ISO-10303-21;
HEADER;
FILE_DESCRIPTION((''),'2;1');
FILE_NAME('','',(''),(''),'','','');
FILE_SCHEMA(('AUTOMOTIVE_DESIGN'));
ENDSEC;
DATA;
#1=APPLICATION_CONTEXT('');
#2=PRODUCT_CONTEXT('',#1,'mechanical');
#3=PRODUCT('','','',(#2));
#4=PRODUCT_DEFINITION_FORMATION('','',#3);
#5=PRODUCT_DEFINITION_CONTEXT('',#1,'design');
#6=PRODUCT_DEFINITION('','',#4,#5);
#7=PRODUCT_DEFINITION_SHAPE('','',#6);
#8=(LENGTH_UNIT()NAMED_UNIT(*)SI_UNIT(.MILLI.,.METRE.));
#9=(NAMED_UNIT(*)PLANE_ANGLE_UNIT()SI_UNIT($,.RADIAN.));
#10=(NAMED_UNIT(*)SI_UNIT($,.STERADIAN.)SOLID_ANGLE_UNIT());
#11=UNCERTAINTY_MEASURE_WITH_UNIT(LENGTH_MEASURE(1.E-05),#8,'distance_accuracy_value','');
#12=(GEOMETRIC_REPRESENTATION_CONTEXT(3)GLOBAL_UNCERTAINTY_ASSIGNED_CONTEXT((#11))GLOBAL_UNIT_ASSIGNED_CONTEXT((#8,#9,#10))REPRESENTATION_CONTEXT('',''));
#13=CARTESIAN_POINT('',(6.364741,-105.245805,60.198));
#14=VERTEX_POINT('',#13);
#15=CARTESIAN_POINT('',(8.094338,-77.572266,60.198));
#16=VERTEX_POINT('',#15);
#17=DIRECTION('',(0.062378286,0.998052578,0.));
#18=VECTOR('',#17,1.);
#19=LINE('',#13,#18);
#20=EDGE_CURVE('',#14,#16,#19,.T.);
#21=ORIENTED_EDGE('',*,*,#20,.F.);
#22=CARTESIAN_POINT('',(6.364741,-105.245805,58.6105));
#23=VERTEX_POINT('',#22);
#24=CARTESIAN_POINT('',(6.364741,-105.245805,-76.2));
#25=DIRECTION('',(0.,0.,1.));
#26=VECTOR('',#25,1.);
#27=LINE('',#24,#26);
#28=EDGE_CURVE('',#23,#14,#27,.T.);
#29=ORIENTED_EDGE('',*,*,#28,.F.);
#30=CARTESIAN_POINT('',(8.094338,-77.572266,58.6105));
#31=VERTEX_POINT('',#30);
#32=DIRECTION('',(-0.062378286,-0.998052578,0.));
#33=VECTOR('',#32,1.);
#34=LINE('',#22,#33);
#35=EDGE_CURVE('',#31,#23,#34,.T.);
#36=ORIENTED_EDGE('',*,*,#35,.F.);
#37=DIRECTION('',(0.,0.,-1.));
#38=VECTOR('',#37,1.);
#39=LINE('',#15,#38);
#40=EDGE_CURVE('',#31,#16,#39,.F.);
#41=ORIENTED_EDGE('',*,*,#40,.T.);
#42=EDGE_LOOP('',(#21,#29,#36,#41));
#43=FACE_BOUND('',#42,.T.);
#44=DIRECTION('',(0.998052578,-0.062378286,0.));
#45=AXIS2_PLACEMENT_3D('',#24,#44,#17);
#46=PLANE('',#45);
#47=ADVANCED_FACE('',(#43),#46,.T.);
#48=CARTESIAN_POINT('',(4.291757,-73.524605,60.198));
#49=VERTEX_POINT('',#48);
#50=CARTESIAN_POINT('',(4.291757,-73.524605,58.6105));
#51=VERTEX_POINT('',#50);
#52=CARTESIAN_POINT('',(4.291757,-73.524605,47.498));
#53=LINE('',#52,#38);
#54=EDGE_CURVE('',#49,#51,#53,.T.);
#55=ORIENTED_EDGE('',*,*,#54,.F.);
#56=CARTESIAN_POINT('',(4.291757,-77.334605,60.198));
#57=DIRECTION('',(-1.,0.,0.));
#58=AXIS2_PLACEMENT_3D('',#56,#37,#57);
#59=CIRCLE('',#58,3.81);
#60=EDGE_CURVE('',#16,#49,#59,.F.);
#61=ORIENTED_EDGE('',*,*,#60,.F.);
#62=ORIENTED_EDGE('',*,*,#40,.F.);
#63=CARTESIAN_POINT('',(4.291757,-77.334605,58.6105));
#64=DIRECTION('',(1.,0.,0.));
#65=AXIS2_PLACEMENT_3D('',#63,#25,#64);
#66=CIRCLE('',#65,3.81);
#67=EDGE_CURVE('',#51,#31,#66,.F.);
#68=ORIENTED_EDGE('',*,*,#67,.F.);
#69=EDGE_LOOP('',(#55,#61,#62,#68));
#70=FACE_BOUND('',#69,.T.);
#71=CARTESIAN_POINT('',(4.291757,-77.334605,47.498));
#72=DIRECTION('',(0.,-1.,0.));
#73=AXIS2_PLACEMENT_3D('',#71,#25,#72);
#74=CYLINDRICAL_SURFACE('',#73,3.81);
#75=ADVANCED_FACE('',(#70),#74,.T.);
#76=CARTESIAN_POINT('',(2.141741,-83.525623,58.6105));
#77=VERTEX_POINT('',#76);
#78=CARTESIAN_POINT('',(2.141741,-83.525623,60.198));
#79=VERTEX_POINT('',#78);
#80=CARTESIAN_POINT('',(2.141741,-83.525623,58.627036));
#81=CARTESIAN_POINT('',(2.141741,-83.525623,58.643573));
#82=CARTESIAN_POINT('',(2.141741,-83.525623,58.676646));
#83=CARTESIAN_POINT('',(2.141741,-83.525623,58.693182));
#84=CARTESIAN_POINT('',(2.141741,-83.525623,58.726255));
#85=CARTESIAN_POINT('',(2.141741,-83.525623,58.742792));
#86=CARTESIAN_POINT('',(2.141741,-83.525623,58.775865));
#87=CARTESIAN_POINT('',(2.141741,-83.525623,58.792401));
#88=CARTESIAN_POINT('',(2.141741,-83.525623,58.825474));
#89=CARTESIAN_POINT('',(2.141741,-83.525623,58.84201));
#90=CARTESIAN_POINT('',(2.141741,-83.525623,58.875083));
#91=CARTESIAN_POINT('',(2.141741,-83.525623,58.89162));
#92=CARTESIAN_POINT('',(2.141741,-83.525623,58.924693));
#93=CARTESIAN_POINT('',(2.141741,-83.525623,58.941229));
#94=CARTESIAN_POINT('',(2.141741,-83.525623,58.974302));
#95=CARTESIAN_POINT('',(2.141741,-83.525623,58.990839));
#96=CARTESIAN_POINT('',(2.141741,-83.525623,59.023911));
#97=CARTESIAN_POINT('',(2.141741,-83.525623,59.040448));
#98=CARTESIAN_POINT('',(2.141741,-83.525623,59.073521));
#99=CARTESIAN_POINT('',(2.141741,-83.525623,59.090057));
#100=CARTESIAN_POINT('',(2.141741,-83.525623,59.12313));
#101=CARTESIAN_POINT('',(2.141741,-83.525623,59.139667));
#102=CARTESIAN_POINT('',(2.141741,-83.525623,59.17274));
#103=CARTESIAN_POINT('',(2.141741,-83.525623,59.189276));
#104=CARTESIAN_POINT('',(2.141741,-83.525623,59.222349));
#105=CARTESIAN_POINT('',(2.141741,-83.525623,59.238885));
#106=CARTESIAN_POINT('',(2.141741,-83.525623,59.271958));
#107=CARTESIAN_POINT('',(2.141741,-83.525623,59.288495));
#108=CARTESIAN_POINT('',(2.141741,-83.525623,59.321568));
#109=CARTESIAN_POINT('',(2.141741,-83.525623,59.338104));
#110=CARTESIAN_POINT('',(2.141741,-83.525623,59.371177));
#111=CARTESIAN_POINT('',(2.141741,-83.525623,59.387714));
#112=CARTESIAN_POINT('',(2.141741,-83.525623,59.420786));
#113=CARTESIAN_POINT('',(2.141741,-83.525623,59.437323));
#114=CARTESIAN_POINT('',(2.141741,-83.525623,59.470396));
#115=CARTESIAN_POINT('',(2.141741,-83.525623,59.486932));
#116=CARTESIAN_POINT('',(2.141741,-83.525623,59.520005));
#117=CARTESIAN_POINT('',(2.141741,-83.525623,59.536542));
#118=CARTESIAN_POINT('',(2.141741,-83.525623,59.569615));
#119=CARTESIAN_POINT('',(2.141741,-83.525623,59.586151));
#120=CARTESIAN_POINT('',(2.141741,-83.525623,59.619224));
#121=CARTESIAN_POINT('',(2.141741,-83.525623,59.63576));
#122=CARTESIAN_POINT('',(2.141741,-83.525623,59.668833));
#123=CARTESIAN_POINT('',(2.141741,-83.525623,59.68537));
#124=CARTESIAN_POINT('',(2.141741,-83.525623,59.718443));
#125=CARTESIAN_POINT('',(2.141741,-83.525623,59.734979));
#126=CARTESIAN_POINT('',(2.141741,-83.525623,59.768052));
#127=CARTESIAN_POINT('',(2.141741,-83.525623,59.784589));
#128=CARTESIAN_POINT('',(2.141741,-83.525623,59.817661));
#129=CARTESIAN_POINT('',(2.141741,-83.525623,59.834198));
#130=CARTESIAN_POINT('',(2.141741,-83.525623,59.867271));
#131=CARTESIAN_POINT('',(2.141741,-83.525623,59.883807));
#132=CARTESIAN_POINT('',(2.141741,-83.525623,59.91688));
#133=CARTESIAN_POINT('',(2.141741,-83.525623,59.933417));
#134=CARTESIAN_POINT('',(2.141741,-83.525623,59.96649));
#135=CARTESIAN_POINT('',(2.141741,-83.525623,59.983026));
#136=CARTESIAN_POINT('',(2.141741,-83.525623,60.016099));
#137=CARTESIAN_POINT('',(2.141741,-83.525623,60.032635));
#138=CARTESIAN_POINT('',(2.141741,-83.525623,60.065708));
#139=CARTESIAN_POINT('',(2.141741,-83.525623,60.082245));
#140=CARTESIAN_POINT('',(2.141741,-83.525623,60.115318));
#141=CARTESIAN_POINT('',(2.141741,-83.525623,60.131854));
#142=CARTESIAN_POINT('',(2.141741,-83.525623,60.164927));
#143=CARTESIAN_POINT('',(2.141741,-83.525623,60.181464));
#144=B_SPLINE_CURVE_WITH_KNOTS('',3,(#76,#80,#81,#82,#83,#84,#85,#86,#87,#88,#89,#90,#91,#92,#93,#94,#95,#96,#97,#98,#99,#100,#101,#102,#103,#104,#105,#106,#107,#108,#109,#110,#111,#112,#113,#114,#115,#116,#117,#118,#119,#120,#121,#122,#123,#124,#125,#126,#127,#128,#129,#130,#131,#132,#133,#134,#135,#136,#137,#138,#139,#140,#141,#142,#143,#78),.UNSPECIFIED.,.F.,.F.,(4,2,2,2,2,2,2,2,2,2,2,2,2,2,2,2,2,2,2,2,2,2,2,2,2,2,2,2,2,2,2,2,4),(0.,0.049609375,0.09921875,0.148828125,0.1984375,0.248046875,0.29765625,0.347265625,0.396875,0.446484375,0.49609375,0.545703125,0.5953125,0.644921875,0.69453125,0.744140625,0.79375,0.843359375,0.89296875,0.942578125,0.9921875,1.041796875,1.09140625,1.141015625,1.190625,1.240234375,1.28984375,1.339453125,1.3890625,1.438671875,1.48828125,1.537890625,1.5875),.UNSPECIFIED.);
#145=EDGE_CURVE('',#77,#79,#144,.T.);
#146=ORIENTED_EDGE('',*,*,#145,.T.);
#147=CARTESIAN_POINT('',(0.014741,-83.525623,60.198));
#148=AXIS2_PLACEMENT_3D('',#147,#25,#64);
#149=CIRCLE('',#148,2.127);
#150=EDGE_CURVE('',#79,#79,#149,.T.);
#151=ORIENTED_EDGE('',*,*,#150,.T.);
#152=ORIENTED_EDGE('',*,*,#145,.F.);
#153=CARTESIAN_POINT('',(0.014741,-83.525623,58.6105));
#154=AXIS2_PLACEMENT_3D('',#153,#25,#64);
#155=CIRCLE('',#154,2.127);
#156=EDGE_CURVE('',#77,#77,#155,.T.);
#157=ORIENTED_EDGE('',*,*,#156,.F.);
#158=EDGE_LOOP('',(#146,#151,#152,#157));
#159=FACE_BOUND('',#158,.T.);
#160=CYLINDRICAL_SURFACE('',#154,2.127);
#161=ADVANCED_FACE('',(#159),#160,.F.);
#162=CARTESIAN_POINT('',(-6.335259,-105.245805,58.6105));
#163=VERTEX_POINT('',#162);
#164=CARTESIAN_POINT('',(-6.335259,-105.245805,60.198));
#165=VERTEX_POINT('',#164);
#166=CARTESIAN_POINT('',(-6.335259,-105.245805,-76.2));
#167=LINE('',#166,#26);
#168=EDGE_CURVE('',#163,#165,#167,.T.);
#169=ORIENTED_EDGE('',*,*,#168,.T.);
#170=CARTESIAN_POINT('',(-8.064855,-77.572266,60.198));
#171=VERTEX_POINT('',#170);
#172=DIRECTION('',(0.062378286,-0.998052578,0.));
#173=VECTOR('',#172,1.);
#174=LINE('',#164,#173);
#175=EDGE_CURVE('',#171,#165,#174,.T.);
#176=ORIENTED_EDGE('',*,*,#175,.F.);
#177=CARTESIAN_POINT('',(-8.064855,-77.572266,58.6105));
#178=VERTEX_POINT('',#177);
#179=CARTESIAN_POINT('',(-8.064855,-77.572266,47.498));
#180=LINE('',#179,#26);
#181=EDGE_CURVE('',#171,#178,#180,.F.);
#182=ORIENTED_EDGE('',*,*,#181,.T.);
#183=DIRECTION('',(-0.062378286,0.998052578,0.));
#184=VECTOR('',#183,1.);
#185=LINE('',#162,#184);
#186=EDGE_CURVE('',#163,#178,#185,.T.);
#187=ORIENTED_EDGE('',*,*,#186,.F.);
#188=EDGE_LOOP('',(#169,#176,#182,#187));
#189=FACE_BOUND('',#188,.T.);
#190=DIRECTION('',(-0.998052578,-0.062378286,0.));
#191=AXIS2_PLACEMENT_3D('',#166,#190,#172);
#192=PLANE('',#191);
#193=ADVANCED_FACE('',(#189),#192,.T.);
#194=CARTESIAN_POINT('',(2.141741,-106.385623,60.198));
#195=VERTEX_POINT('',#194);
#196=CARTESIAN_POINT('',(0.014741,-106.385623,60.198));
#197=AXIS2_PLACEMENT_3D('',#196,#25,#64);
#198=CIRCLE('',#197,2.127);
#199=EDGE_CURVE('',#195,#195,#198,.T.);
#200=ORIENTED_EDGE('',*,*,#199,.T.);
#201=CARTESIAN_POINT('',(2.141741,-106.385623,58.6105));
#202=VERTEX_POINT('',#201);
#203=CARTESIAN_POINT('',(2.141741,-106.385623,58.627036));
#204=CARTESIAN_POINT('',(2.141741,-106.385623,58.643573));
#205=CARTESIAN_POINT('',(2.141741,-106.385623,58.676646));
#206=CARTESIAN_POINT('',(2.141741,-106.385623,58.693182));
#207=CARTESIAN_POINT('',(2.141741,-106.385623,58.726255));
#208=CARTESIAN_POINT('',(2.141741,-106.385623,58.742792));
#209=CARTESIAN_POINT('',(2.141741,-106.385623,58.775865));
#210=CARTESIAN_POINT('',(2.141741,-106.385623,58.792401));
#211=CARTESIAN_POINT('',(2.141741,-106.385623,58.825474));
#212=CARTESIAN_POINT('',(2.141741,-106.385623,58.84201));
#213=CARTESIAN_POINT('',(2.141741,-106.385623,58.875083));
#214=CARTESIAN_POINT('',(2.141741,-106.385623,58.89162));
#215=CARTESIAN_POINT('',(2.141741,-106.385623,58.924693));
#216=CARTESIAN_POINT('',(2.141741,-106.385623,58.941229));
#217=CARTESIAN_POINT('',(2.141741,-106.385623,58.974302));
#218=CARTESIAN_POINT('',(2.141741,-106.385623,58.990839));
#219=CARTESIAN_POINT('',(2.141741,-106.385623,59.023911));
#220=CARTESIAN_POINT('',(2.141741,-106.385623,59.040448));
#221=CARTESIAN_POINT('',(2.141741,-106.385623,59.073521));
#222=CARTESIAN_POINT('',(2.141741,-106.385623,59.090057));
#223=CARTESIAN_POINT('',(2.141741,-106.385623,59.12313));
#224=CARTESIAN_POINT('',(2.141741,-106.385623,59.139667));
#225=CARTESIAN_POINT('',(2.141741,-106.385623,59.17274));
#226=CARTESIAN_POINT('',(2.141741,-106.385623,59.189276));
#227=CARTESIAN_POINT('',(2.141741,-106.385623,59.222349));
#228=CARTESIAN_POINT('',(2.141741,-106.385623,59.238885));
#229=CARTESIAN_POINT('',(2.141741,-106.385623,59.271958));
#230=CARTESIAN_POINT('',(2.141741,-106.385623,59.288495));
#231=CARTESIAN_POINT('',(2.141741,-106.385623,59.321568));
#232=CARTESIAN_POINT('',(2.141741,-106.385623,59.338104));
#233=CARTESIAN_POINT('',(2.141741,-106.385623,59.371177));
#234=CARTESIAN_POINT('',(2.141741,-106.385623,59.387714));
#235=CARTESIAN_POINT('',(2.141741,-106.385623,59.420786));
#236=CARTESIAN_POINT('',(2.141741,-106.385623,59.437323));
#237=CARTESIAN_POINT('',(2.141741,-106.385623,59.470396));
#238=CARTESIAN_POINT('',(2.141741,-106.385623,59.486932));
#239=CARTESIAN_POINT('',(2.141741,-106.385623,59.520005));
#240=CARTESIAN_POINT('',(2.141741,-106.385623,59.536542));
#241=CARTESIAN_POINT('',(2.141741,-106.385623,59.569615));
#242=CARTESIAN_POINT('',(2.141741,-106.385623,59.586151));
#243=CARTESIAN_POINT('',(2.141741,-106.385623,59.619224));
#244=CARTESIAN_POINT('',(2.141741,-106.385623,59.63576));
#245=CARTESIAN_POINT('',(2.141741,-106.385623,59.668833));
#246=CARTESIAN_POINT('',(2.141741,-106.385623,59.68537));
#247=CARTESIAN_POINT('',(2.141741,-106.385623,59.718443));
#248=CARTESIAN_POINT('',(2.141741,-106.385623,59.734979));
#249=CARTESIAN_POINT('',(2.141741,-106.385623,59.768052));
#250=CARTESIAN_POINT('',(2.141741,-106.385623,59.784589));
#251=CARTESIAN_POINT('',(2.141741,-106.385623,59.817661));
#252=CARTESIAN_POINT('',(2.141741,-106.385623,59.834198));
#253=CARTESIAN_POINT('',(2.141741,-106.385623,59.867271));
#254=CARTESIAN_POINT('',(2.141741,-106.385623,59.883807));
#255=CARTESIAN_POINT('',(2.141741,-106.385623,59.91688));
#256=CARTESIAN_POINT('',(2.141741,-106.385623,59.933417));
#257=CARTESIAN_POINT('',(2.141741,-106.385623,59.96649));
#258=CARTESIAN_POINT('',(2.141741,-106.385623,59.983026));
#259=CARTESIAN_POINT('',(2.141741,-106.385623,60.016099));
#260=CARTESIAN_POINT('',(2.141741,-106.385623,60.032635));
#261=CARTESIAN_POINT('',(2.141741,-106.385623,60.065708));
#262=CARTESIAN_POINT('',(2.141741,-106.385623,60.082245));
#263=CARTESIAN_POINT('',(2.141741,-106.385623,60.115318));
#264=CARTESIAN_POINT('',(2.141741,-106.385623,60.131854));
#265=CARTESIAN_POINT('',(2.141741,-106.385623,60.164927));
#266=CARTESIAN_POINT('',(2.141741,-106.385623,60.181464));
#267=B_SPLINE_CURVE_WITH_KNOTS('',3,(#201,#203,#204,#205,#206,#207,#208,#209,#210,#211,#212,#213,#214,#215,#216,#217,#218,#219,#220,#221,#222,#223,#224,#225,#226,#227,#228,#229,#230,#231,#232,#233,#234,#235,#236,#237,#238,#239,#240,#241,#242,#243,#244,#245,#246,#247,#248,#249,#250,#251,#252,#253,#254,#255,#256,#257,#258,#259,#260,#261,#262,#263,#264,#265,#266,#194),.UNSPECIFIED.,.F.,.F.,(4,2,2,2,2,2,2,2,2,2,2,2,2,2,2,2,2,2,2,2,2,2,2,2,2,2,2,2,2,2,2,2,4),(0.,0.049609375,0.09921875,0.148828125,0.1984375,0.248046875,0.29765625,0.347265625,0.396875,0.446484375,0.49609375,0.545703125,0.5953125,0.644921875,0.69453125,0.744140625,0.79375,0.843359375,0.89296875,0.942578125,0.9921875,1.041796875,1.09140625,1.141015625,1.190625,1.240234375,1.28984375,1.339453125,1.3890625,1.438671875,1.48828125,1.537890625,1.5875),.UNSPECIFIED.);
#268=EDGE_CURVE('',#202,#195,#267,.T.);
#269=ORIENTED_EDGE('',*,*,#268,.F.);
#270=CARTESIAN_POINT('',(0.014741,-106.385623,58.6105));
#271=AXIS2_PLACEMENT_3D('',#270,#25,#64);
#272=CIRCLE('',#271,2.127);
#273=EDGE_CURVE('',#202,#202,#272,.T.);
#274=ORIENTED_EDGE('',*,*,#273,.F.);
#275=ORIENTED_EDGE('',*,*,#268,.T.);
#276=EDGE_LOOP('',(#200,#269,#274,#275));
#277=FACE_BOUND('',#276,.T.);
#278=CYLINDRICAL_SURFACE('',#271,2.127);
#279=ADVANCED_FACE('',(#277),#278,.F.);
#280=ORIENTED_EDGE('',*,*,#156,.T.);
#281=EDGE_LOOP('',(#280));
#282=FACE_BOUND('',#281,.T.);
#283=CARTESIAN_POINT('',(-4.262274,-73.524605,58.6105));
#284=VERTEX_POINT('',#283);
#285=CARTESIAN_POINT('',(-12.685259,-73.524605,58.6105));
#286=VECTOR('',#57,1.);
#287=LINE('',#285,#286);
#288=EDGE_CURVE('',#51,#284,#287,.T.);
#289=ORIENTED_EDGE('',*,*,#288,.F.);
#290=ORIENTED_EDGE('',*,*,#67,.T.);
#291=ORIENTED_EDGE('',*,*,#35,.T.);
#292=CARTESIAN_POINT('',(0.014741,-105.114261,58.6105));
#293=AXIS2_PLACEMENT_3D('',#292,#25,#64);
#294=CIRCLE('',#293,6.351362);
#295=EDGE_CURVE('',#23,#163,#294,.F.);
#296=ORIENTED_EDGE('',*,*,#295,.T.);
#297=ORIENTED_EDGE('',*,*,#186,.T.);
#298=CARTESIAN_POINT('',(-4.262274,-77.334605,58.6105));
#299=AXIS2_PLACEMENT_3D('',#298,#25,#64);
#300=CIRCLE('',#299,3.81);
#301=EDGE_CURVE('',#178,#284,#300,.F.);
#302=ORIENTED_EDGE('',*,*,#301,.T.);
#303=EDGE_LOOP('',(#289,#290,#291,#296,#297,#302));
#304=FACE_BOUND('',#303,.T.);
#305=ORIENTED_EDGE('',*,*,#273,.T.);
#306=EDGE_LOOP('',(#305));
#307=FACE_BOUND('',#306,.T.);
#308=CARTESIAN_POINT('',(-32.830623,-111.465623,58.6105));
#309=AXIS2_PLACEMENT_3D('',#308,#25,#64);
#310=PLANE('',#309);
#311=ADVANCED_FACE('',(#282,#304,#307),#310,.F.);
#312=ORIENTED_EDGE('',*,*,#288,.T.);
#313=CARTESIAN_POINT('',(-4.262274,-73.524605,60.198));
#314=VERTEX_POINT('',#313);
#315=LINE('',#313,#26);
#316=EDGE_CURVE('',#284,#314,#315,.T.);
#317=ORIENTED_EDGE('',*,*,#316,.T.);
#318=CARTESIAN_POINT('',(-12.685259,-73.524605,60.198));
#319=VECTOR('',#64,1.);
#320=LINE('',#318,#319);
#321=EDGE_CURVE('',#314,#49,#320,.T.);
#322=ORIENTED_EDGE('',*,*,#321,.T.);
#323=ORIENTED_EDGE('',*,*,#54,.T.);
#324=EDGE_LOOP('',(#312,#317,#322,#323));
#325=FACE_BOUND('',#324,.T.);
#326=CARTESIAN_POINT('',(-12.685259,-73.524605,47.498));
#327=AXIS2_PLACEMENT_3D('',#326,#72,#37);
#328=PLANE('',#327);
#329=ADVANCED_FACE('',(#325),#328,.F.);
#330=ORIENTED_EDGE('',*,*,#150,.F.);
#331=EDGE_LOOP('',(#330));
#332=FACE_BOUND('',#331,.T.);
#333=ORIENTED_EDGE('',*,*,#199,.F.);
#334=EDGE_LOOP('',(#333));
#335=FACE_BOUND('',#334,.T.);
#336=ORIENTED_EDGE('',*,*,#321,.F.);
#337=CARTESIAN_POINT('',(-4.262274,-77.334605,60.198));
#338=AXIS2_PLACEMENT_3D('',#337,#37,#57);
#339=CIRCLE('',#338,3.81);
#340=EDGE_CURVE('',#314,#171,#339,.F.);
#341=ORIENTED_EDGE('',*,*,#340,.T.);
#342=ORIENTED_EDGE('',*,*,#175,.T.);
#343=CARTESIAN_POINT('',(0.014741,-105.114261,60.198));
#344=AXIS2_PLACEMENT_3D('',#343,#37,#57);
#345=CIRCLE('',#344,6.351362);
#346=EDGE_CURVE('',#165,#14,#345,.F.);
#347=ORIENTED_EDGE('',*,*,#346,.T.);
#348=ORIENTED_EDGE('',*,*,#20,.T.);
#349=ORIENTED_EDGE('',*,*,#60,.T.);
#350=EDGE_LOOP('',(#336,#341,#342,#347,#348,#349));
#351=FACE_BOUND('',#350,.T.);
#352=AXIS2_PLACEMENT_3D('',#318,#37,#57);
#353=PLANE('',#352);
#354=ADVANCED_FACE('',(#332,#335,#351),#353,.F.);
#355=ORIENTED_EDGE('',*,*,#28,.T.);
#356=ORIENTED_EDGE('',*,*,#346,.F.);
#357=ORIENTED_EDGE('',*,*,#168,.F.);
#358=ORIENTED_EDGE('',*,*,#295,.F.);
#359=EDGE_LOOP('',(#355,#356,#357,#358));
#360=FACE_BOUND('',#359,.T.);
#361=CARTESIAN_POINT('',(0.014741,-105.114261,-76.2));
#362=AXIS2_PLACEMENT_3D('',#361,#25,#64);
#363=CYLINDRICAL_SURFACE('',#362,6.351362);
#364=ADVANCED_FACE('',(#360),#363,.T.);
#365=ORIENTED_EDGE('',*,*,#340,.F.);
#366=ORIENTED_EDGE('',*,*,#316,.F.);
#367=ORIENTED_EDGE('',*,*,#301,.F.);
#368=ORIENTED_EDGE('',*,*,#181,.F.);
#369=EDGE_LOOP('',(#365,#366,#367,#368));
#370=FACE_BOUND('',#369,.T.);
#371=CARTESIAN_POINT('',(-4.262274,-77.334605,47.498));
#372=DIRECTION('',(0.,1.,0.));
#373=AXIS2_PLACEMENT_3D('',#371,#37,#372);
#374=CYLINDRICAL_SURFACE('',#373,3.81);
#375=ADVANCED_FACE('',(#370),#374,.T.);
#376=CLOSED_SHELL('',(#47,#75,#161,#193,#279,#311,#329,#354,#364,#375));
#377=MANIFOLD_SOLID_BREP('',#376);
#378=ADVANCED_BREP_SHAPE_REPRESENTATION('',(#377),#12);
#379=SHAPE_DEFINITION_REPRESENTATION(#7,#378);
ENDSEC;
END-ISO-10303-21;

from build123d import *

# Parameters (mm, degrees)
BOSS_EXTRUDE1_DEPTH      = 76.2
BOSS_EXTRUDE1_DEPTH_BACK = 76.2
CUT_EXTRUDE1_DEPTH       = 136.619651209
CUT_EXTRUDE1_DEPTH_BACK  = 136.619651209
FILLET1_R                = 3.81
SHELL1_START             = -44.45
SHELL1_DEPTH             = 88.773
SHELL1_START_2           = -73.025
SHELL1_2_DEPTH           = 130.048
CUT_EXTRUDE2_DEPTH       = 136.355460931
CUT_EXTRUDE2_DEPTH_BACK  = 136.355460931
SKETCH8_W                = 51.042359072
SKETCH8_H                = 158.808122299
CUT_EXTRUDE3_DEPTH       = 112.770943321
CUT_EXTRUDE3_DEPTH_BACK  = 112.770943321
SKETCH9_R                = 2.127


# Read off the part's stored shape, not the designer's step: Shell1
with BuildPart() as part:
    # Sketch1 → Boss-Extrude1 (new, two sides: drawn at the far end of the back side and taken through both)
    with BuildSketch(Plane.XY.offset(-BOSS_EXTRUDE1_DEPTH_BACK)):
        with BuildLine():
            Line((-6.335258536, -105.245804705), (-12.685258536, -3.645804705))
            ThreePointArc((-12.685258536, -3.645804705), (0.014741464, 8.866413132), (12.714741464, -3.645804705))
            Line((12.714741464, -3.645804705), (6.364741464, -105.245804705))
            ThreePointArc((6.364741464, -105.245804705), (0.014741464, -111.465623147), (-6.335258536, -105.245804705))
        make_face()
    extrude(amount=BOSS_EXTRUDE1_DEPTH + BOSS_EXTRUDE1_DEPTH_BACK)

    # Sketch4 → Cut-Extrude1 (cut, two sides: drawn at the far end of the back side and taken through both)
    with BuildSketch(Plane(origin=(0, 0, 0), x_dir=(0, 0, -1), z_dir=(1, 0, 0)).offset(-CUT_EXTRUDE1_DEPTH_BACK)):
        Polygon((-47.498, -73.524605007), (-47.498, -51.299605007), (47.625, -51.299605007), (47.625, -73.524605007), (76.2, -73.524605007), (76.2, 8.866413132), (-76.2, 8.866413132), (-76.2, -28.682279346), (-76.2, -111.465623147), (-60.198, -111.465623147), (-60.198, -73.524605007), align=None)
    extrude(amount=CUT_EXTRUDE1_DEPTH + CUT_EXTRUDE1_DEPTH_BACK, mode=Mode.SUBTRACT)

    # Fillet1
    fillet1_edges = [part.edges().sort_by_distance(p)[0] for p in [
        (8.347316445, -73.524605007, 53.848),
        (9.736378945, -51.299605007, -0.0635),
        (-9.706896017, -51.299605007, -0.0635),
        (-8.317833517, -73.524605007, 53.848),
        (-8.317833517, -73.524605007, -61.9125),
        (8.347316445, -73.524605007, -61.9125),
    ]]
    fillet(fillet1_edges, radius=FILLET1_R)

    # Shell1 outline → Shell1 (cut)
    with BuildSketch(Plane.XY.offset(SHELL1_START)):
        with BuildLine():
            ThreePointArc((-3.161602106, -105.125185529), (0.014741465, -108.290623147), (3.191085035, -105.125185529))
            Line((3.191085035, -105.125185529), (6.314583179, -55.149215219))
            ThreePointArc((6.314583179, -55.149215219), (6.143625088, -54.674822007), (5.680819792, -54.474605007))
            Line((5.680819792, -54.474605007), (-5.651336863, -54.474605007))
            ThreePointArc((-5.651336863, -54.474605007), (-6.114142159, -54.674822006), (-6.285100251, -55.149215219))
            Line((-6.285100251, -55.149215219), (-3.161602106, -105.125185529))
        make_face()
    extrude(amount=SHELL1_DEPTH, mode=Mode.SUBTRACT)

    # Shell1 2 outline → Shell1 2 (cut)
    with BuildSketch(Plane.XY.offset(SHELL1_START_2)):
        with BuildLine():
            Line((-4.896037751, -77.374215219), (-3.161602106, -105.125185529))
            ThreePointArc((-3.161602106, -105.125185529), (0.014741465, -108.290623147), (3.191085035, -105.125185529))
            Line((3.191085035, -105.125185529), (4.925520679, -77.374215219))
            ThreePointArc((4.925520679, -77.374215219), (4.754562588, -76.899822007), (4.291757292, -76.699605007))
            Line((4.291757292, -76.699605007), (-4.262274363, -76.699605007))
            ThreePointArc((-4.262274363, -76.699605007), (-4.725079659, -76.899822006), (-4.896037751, -77.374215219))
        make_face()
    extrude(amount=SHELL1_2_DEPTH, mode=Mode.SUBTRACT)

    # Sketch8 → Cut-Extrude2 (cut, two sides: drawn at the far end of the back side and taken through both)
    with BuildSketch(Plane(origin=(0, 0, 0), x_dir=(1, 0, 0), z_dir=(0, 1, 0)).offset(-CUT_EXTRUDE2_DEPTH_BACK)):
        with Locations((-7.309443233, 20.79356115)):
            Rectangle(SKETCH8_W, SKETCH8_H)
    extrude(amount=CUT_EXTRUDE2_DEPTH + CUT_EXTRUDE2_DEPTH_BACK, mode=Mode.SUBTRACT)

    # Sketch9 → Cut-Extrude3 (cut, two sides: drawn at the far end of the back side and taken through both)
    with BuildSketch(Plane.XY.offset(60.198).offset(-CUT_EXTRUDE3_DEPTH_BACK)):
        with Locations((0.014741464, -106.385623147)):
            Circle(SKETCH9_R)
        with Locations((0.014741464, -83.525623147)):
            Circle(SKETCH9_R)
    extrude(amount=CUT_EXTRUDE3_DEPTH + CUT_EXTRUDE3_DEPTH_BACK, mode=Mode.SUBTRACT)


solid = part.part
